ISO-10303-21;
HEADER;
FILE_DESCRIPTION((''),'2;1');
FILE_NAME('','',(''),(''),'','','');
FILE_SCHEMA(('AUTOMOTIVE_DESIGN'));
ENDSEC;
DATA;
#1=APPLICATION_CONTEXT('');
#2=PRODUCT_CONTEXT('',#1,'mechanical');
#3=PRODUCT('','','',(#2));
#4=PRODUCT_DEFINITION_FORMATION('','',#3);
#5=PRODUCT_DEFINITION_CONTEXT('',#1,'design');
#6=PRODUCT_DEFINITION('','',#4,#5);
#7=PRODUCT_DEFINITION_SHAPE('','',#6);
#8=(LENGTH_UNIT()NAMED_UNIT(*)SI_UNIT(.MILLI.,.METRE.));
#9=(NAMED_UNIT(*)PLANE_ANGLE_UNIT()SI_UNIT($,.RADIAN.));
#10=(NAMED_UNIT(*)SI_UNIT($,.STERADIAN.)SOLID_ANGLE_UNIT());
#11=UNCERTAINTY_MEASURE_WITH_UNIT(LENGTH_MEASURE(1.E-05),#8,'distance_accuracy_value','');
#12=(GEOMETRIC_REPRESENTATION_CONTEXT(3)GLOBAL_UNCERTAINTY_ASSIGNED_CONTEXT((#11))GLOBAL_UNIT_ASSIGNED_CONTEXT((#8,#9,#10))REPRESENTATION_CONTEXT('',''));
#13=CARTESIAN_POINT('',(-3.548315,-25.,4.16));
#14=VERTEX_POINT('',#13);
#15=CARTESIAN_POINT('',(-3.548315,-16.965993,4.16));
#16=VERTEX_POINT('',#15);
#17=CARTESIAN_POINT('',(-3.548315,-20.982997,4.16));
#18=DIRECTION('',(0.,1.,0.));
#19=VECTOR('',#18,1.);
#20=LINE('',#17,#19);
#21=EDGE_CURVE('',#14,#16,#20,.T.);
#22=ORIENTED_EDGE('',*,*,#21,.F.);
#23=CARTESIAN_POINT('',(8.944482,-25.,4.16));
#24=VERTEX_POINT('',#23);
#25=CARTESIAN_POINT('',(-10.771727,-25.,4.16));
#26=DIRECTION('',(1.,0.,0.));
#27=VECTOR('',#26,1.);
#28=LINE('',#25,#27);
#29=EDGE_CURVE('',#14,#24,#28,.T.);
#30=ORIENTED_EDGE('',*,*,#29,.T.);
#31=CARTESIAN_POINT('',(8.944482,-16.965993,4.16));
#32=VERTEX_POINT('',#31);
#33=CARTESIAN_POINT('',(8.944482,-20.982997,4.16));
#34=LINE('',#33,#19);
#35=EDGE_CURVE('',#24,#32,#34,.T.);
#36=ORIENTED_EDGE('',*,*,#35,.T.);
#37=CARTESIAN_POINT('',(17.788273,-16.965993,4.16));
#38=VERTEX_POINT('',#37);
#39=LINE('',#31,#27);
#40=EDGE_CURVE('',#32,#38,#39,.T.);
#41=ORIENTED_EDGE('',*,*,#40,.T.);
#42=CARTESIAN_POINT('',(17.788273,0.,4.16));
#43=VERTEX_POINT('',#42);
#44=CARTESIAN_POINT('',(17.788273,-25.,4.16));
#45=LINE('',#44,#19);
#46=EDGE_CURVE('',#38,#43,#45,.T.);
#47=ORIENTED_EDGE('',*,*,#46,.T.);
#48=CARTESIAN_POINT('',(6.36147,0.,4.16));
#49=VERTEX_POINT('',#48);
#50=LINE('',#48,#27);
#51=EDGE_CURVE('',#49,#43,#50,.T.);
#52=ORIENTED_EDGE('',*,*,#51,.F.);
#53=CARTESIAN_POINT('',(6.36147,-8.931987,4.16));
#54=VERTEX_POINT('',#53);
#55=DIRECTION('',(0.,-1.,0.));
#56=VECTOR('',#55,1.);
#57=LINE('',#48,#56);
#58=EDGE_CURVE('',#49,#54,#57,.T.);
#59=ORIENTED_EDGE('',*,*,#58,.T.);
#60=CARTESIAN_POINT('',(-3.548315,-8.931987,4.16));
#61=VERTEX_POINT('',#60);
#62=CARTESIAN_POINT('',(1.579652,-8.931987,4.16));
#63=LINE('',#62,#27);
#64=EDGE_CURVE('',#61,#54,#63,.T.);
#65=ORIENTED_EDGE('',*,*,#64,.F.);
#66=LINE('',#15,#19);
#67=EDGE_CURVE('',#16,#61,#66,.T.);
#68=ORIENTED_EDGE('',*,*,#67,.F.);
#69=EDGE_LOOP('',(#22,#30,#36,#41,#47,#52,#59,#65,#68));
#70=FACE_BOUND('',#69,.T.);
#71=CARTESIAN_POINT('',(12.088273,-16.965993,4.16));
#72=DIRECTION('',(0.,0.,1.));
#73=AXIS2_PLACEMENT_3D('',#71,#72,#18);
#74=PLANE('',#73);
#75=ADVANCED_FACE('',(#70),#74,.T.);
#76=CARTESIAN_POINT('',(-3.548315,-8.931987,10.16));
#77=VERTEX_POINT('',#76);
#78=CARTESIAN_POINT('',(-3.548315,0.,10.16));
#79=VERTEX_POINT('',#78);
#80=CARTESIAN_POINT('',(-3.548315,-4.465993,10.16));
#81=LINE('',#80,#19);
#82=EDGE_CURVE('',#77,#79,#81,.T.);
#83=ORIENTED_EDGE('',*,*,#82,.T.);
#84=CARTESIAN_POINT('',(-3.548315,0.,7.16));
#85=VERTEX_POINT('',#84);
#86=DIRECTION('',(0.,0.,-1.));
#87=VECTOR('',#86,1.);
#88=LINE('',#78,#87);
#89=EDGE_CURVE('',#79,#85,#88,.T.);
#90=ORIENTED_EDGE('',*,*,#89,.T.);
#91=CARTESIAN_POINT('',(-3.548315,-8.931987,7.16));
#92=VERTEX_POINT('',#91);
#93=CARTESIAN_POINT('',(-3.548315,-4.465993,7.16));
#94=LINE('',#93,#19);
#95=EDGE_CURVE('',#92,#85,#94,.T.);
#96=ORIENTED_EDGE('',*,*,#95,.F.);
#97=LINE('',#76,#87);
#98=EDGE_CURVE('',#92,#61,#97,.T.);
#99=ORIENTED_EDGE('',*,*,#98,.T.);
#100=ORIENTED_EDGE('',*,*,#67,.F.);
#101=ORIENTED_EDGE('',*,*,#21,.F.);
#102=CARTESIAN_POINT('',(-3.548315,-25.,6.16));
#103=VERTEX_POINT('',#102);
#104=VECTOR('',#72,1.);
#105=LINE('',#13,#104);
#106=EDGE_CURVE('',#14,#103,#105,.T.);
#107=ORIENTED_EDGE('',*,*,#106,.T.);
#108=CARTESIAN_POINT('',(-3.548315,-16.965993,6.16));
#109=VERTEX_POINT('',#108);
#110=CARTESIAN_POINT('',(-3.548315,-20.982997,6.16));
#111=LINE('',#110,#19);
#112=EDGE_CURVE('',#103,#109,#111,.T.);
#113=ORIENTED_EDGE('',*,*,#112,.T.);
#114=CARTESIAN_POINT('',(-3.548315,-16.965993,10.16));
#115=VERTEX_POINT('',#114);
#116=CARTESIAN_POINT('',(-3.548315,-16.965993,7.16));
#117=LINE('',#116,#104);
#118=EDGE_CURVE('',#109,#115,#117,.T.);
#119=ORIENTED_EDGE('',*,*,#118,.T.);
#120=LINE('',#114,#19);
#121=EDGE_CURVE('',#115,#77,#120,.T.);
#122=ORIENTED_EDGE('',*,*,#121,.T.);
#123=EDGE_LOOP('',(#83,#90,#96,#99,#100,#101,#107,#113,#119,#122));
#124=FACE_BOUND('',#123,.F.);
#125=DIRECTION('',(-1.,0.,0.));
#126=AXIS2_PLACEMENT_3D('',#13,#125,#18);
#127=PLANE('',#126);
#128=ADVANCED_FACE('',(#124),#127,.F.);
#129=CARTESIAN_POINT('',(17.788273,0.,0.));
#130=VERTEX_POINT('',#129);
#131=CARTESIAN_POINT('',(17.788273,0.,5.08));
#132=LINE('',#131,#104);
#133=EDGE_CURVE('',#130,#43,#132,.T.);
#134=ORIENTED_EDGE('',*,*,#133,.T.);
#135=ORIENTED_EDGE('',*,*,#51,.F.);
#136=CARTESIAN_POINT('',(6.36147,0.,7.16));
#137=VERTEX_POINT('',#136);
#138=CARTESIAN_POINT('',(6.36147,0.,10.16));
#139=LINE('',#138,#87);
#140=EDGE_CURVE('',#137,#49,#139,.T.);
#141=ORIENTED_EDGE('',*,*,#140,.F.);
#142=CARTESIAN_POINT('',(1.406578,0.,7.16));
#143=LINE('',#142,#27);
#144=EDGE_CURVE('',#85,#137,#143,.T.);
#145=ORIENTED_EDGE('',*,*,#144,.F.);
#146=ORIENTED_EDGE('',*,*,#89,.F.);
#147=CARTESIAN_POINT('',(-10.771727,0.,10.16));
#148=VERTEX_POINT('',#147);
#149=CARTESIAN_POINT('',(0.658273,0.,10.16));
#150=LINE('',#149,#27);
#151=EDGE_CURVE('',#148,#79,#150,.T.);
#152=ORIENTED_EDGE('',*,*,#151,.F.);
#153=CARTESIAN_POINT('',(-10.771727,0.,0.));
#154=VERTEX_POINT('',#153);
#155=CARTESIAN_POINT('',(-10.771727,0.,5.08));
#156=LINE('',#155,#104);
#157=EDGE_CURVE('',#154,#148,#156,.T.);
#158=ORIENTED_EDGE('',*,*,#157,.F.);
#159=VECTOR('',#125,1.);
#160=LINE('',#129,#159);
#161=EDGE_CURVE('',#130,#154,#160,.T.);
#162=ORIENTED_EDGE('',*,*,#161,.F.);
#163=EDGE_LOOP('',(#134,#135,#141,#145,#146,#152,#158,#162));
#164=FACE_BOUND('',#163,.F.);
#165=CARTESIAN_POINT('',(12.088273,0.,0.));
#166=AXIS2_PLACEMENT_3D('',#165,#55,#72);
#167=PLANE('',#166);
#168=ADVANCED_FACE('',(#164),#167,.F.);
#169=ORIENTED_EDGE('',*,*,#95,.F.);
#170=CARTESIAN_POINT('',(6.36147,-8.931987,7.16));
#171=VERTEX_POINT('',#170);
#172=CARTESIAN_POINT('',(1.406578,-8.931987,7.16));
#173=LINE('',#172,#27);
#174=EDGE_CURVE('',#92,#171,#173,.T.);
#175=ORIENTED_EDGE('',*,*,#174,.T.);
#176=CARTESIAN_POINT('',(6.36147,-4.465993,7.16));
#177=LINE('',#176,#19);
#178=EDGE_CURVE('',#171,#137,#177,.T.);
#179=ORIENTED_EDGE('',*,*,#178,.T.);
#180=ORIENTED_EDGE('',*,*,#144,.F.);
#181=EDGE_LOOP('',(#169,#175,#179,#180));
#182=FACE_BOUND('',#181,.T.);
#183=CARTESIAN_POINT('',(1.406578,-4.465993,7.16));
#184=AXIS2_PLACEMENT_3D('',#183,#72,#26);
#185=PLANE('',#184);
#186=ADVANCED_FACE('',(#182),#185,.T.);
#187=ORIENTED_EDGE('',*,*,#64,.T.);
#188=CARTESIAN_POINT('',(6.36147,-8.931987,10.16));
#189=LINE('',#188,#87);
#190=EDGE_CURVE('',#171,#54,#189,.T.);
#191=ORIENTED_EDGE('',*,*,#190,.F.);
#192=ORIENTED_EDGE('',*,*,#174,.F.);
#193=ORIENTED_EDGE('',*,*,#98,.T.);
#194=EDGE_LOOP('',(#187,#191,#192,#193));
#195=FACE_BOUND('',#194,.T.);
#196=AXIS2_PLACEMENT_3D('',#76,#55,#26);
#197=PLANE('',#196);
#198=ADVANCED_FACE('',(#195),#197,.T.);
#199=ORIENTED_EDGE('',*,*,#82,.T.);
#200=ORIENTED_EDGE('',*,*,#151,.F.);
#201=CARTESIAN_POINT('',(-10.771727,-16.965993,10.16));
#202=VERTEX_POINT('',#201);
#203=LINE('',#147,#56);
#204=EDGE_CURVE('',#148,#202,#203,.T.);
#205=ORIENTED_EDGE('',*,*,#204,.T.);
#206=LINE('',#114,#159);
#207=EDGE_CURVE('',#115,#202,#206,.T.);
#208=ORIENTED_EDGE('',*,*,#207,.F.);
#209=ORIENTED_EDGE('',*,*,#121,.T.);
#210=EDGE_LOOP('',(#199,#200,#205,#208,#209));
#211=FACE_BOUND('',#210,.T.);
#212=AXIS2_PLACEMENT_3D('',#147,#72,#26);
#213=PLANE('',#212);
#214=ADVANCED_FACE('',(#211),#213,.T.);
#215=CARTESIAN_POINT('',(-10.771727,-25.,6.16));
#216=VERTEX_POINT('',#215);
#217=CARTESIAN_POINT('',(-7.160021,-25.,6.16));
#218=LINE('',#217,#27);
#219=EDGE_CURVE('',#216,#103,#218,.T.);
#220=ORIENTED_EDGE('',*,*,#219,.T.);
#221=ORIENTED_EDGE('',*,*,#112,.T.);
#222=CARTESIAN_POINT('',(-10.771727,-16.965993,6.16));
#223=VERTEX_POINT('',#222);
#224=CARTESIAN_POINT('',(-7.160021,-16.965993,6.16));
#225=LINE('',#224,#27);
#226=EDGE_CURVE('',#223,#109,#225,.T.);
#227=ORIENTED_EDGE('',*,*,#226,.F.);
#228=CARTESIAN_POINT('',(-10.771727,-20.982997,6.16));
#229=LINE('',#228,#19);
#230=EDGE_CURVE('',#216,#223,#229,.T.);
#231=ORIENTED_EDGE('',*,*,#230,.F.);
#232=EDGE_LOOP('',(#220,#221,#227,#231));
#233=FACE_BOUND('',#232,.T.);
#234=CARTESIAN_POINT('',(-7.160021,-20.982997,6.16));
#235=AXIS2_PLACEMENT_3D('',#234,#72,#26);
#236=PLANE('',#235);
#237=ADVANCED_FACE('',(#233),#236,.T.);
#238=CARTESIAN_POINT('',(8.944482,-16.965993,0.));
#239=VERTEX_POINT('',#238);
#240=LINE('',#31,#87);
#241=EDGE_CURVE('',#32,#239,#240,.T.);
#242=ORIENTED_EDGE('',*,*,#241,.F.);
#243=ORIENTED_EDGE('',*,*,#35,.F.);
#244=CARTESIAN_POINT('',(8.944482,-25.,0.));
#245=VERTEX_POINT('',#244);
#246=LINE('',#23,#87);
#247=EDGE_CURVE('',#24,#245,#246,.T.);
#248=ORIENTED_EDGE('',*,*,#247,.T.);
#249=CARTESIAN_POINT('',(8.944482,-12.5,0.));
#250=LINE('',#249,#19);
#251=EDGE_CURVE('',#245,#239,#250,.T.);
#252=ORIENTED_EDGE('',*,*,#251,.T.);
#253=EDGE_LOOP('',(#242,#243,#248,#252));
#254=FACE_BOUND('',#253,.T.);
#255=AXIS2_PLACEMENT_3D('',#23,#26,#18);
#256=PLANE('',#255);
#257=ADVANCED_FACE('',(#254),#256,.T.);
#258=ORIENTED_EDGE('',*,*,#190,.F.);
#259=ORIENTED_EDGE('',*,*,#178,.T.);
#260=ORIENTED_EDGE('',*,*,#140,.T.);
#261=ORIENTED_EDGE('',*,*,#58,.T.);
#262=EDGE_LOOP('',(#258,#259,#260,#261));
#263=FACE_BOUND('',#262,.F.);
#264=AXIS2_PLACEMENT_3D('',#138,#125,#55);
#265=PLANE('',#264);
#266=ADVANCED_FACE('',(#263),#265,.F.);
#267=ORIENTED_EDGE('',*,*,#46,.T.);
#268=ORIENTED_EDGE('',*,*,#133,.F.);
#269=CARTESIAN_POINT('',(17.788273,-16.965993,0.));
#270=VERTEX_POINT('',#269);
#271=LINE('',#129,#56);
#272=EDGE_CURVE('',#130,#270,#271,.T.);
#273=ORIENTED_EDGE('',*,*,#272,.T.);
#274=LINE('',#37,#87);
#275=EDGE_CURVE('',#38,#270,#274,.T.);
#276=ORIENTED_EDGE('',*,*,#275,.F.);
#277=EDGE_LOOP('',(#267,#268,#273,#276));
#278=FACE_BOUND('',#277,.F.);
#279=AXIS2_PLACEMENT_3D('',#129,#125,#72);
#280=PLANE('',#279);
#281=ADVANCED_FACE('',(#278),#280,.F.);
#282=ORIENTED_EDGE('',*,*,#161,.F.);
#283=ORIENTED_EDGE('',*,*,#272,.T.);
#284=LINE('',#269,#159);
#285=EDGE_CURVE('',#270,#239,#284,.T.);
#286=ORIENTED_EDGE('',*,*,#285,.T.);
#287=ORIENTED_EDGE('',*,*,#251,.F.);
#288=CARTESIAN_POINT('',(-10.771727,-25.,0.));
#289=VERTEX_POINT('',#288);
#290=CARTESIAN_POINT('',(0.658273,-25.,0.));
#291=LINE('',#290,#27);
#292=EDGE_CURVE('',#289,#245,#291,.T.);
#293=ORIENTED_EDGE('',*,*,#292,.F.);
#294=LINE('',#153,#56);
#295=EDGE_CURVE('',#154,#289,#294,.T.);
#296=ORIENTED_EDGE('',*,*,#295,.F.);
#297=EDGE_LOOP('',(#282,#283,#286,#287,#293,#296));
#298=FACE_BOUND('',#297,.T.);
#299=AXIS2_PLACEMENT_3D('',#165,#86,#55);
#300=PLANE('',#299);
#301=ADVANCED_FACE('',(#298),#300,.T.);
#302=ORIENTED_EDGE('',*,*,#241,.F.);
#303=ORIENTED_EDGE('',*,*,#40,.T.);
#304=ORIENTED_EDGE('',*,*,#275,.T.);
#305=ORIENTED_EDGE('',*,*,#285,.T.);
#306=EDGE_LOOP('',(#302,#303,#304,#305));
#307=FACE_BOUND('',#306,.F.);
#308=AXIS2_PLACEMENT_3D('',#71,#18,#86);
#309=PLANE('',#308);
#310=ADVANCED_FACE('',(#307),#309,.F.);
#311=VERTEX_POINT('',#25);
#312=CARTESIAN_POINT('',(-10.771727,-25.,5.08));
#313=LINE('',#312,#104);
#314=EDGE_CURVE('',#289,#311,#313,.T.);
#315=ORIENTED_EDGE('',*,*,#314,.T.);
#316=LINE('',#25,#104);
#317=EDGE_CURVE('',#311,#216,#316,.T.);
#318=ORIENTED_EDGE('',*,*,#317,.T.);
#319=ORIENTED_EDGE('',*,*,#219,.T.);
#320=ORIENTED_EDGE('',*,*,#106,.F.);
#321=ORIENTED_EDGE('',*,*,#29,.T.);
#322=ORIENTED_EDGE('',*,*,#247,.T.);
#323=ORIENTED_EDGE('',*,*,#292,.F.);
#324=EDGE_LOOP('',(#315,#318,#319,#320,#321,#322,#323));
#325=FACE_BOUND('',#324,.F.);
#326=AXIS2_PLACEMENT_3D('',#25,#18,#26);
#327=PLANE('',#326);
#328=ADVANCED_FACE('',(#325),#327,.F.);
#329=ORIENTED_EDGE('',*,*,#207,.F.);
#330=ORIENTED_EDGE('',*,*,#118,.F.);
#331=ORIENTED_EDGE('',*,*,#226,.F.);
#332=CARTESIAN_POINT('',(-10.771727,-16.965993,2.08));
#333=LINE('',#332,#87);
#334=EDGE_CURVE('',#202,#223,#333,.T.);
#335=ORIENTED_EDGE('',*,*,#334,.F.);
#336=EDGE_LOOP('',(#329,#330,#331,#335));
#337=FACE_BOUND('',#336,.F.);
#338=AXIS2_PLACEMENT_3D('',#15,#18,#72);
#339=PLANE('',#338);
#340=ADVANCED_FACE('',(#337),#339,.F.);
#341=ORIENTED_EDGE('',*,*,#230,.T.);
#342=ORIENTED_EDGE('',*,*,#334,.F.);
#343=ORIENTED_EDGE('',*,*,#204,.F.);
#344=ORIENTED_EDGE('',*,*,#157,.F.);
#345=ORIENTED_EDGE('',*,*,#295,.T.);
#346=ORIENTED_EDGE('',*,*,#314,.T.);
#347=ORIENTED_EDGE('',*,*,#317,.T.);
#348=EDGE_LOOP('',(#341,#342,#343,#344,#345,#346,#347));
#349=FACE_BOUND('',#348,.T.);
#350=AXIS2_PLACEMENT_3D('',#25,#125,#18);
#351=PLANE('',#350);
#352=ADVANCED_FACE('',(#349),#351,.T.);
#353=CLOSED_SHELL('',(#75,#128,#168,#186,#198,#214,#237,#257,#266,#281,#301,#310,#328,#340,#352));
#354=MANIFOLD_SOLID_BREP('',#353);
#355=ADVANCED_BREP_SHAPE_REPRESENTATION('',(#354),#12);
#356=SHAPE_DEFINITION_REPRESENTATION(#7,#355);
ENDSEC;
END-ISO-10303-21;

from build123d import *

# Parameters (mm, degrees)
F0_W      = 22.86
F0_H      = 10.16
F1_DEPTH  = 25
F2_W      = 7.1686236836
F2_H      = 5.1849592477
F3_DEPTH  = 5
F4_W      = 9.9097841885
F4_H      = 8.9319869876
F5_DEPTH  = 3
F6_W      = 10.2559335064
F6_H      = 16.0680130124
F7_DEPTH  = 6
F8_W      = 3.1437913674
F8_H      = 8.0340065062
F9_DEPTH  = 25
F10_W     = 8.0340065062
F10_H     = 6
F11_DEPTH = 7.2244124593
F12_W     = 7.2234124593
F12_H     = 8.0340065062
F13_DEPTH = 2
F14_DEPTH = 5.7


# Not quite as in the source:
# - a feature names something its author has since deleted; it is built from what else it names


with BuildPart() as f1:
    # F0 (on Front) → F1 (new body)
    with BuildSketch(Plane.XZ):
        with Locations((0.6582729786, 5.08)):
            Rectangle(F0_W, F0_H)
    extrude(amount=F1_DEPTH)

    # F2 (on face) → F3 (cut)
    with BuildSketch(Plane.XY.offset(10.16)):
        with Locations((-7.1874151796, -22.4075203761)):
            Rectangle(F2_W, F2_H)
    extrude(amount=-F3_DEPTH, mode=Mode.SUBTRACT)

    # F4 (on face) → F5 (cut)
    with BuildSketch(Plane.XY.offset(10.16)):
        with Locations((1.4065775322, -4.4659934938)):
            Rectangle(F4_W, F4_H)
    extrude(amount=-F5_DEPTH, mode=Mode.SUBTRACT)

    # F6 (on face) → F7 (cut)
    with BuildSketch(Plane.XY.offset(10.16)):
        with Locations((1.5796521911, -16.9659934938)):
            Rectangle(F6_W, F6_H)
        Polygon((6.3614696264, 0), (6.3614696264, -8.9319869876), (6.7076189443, -8.9319869876), (6.7076189443, -25), (12.0882729786, -25), (12.0882729786, 0), align=None)
    extrude(amount=-F7_DEPTH, mode=Mode.SUBTRACT)

    # F8 (on face) → F9 (cut)
    with BuildSketch(Plane.XY.offset(4.16)):
        with Locations((10.5163772949, -20.9829967469)):
            Rectangle(F8_W, F8_H)
    extrude(amount=-F9_DEPTH, mode=Mode.SUBTRACT)

    # F10 (on face) → F11 (cut, through all)
    with BuildSketch(Plane.YZ.offset(-3.5483145621)):
        with Locations((-20.9829967469, 7.16)):
            Rectangle(F10_W, F10_H)
    extrude(amount=-F11_DEPTH, mode=Mode.SUBTRACT)

    # F12 (on face) → F13 (join)
    with BuildSketch(Plane.XY.offset(4.16)):
        with Locations((-7.1600207917, -20.9829967469)):
            Rectangle(F12_W, F12_H)
    extrude(amount=F13_DEPTH)

    # F14 (add): a face of the model
    f14_faces = [f1.faces().sort_by_distance(p)[0] for p in [
        (12.0882729786, -8.4829967469, 2.08),
    ]]
    extrude(f14_faces, amount=F14_DEPTH)


solid = f1.part
